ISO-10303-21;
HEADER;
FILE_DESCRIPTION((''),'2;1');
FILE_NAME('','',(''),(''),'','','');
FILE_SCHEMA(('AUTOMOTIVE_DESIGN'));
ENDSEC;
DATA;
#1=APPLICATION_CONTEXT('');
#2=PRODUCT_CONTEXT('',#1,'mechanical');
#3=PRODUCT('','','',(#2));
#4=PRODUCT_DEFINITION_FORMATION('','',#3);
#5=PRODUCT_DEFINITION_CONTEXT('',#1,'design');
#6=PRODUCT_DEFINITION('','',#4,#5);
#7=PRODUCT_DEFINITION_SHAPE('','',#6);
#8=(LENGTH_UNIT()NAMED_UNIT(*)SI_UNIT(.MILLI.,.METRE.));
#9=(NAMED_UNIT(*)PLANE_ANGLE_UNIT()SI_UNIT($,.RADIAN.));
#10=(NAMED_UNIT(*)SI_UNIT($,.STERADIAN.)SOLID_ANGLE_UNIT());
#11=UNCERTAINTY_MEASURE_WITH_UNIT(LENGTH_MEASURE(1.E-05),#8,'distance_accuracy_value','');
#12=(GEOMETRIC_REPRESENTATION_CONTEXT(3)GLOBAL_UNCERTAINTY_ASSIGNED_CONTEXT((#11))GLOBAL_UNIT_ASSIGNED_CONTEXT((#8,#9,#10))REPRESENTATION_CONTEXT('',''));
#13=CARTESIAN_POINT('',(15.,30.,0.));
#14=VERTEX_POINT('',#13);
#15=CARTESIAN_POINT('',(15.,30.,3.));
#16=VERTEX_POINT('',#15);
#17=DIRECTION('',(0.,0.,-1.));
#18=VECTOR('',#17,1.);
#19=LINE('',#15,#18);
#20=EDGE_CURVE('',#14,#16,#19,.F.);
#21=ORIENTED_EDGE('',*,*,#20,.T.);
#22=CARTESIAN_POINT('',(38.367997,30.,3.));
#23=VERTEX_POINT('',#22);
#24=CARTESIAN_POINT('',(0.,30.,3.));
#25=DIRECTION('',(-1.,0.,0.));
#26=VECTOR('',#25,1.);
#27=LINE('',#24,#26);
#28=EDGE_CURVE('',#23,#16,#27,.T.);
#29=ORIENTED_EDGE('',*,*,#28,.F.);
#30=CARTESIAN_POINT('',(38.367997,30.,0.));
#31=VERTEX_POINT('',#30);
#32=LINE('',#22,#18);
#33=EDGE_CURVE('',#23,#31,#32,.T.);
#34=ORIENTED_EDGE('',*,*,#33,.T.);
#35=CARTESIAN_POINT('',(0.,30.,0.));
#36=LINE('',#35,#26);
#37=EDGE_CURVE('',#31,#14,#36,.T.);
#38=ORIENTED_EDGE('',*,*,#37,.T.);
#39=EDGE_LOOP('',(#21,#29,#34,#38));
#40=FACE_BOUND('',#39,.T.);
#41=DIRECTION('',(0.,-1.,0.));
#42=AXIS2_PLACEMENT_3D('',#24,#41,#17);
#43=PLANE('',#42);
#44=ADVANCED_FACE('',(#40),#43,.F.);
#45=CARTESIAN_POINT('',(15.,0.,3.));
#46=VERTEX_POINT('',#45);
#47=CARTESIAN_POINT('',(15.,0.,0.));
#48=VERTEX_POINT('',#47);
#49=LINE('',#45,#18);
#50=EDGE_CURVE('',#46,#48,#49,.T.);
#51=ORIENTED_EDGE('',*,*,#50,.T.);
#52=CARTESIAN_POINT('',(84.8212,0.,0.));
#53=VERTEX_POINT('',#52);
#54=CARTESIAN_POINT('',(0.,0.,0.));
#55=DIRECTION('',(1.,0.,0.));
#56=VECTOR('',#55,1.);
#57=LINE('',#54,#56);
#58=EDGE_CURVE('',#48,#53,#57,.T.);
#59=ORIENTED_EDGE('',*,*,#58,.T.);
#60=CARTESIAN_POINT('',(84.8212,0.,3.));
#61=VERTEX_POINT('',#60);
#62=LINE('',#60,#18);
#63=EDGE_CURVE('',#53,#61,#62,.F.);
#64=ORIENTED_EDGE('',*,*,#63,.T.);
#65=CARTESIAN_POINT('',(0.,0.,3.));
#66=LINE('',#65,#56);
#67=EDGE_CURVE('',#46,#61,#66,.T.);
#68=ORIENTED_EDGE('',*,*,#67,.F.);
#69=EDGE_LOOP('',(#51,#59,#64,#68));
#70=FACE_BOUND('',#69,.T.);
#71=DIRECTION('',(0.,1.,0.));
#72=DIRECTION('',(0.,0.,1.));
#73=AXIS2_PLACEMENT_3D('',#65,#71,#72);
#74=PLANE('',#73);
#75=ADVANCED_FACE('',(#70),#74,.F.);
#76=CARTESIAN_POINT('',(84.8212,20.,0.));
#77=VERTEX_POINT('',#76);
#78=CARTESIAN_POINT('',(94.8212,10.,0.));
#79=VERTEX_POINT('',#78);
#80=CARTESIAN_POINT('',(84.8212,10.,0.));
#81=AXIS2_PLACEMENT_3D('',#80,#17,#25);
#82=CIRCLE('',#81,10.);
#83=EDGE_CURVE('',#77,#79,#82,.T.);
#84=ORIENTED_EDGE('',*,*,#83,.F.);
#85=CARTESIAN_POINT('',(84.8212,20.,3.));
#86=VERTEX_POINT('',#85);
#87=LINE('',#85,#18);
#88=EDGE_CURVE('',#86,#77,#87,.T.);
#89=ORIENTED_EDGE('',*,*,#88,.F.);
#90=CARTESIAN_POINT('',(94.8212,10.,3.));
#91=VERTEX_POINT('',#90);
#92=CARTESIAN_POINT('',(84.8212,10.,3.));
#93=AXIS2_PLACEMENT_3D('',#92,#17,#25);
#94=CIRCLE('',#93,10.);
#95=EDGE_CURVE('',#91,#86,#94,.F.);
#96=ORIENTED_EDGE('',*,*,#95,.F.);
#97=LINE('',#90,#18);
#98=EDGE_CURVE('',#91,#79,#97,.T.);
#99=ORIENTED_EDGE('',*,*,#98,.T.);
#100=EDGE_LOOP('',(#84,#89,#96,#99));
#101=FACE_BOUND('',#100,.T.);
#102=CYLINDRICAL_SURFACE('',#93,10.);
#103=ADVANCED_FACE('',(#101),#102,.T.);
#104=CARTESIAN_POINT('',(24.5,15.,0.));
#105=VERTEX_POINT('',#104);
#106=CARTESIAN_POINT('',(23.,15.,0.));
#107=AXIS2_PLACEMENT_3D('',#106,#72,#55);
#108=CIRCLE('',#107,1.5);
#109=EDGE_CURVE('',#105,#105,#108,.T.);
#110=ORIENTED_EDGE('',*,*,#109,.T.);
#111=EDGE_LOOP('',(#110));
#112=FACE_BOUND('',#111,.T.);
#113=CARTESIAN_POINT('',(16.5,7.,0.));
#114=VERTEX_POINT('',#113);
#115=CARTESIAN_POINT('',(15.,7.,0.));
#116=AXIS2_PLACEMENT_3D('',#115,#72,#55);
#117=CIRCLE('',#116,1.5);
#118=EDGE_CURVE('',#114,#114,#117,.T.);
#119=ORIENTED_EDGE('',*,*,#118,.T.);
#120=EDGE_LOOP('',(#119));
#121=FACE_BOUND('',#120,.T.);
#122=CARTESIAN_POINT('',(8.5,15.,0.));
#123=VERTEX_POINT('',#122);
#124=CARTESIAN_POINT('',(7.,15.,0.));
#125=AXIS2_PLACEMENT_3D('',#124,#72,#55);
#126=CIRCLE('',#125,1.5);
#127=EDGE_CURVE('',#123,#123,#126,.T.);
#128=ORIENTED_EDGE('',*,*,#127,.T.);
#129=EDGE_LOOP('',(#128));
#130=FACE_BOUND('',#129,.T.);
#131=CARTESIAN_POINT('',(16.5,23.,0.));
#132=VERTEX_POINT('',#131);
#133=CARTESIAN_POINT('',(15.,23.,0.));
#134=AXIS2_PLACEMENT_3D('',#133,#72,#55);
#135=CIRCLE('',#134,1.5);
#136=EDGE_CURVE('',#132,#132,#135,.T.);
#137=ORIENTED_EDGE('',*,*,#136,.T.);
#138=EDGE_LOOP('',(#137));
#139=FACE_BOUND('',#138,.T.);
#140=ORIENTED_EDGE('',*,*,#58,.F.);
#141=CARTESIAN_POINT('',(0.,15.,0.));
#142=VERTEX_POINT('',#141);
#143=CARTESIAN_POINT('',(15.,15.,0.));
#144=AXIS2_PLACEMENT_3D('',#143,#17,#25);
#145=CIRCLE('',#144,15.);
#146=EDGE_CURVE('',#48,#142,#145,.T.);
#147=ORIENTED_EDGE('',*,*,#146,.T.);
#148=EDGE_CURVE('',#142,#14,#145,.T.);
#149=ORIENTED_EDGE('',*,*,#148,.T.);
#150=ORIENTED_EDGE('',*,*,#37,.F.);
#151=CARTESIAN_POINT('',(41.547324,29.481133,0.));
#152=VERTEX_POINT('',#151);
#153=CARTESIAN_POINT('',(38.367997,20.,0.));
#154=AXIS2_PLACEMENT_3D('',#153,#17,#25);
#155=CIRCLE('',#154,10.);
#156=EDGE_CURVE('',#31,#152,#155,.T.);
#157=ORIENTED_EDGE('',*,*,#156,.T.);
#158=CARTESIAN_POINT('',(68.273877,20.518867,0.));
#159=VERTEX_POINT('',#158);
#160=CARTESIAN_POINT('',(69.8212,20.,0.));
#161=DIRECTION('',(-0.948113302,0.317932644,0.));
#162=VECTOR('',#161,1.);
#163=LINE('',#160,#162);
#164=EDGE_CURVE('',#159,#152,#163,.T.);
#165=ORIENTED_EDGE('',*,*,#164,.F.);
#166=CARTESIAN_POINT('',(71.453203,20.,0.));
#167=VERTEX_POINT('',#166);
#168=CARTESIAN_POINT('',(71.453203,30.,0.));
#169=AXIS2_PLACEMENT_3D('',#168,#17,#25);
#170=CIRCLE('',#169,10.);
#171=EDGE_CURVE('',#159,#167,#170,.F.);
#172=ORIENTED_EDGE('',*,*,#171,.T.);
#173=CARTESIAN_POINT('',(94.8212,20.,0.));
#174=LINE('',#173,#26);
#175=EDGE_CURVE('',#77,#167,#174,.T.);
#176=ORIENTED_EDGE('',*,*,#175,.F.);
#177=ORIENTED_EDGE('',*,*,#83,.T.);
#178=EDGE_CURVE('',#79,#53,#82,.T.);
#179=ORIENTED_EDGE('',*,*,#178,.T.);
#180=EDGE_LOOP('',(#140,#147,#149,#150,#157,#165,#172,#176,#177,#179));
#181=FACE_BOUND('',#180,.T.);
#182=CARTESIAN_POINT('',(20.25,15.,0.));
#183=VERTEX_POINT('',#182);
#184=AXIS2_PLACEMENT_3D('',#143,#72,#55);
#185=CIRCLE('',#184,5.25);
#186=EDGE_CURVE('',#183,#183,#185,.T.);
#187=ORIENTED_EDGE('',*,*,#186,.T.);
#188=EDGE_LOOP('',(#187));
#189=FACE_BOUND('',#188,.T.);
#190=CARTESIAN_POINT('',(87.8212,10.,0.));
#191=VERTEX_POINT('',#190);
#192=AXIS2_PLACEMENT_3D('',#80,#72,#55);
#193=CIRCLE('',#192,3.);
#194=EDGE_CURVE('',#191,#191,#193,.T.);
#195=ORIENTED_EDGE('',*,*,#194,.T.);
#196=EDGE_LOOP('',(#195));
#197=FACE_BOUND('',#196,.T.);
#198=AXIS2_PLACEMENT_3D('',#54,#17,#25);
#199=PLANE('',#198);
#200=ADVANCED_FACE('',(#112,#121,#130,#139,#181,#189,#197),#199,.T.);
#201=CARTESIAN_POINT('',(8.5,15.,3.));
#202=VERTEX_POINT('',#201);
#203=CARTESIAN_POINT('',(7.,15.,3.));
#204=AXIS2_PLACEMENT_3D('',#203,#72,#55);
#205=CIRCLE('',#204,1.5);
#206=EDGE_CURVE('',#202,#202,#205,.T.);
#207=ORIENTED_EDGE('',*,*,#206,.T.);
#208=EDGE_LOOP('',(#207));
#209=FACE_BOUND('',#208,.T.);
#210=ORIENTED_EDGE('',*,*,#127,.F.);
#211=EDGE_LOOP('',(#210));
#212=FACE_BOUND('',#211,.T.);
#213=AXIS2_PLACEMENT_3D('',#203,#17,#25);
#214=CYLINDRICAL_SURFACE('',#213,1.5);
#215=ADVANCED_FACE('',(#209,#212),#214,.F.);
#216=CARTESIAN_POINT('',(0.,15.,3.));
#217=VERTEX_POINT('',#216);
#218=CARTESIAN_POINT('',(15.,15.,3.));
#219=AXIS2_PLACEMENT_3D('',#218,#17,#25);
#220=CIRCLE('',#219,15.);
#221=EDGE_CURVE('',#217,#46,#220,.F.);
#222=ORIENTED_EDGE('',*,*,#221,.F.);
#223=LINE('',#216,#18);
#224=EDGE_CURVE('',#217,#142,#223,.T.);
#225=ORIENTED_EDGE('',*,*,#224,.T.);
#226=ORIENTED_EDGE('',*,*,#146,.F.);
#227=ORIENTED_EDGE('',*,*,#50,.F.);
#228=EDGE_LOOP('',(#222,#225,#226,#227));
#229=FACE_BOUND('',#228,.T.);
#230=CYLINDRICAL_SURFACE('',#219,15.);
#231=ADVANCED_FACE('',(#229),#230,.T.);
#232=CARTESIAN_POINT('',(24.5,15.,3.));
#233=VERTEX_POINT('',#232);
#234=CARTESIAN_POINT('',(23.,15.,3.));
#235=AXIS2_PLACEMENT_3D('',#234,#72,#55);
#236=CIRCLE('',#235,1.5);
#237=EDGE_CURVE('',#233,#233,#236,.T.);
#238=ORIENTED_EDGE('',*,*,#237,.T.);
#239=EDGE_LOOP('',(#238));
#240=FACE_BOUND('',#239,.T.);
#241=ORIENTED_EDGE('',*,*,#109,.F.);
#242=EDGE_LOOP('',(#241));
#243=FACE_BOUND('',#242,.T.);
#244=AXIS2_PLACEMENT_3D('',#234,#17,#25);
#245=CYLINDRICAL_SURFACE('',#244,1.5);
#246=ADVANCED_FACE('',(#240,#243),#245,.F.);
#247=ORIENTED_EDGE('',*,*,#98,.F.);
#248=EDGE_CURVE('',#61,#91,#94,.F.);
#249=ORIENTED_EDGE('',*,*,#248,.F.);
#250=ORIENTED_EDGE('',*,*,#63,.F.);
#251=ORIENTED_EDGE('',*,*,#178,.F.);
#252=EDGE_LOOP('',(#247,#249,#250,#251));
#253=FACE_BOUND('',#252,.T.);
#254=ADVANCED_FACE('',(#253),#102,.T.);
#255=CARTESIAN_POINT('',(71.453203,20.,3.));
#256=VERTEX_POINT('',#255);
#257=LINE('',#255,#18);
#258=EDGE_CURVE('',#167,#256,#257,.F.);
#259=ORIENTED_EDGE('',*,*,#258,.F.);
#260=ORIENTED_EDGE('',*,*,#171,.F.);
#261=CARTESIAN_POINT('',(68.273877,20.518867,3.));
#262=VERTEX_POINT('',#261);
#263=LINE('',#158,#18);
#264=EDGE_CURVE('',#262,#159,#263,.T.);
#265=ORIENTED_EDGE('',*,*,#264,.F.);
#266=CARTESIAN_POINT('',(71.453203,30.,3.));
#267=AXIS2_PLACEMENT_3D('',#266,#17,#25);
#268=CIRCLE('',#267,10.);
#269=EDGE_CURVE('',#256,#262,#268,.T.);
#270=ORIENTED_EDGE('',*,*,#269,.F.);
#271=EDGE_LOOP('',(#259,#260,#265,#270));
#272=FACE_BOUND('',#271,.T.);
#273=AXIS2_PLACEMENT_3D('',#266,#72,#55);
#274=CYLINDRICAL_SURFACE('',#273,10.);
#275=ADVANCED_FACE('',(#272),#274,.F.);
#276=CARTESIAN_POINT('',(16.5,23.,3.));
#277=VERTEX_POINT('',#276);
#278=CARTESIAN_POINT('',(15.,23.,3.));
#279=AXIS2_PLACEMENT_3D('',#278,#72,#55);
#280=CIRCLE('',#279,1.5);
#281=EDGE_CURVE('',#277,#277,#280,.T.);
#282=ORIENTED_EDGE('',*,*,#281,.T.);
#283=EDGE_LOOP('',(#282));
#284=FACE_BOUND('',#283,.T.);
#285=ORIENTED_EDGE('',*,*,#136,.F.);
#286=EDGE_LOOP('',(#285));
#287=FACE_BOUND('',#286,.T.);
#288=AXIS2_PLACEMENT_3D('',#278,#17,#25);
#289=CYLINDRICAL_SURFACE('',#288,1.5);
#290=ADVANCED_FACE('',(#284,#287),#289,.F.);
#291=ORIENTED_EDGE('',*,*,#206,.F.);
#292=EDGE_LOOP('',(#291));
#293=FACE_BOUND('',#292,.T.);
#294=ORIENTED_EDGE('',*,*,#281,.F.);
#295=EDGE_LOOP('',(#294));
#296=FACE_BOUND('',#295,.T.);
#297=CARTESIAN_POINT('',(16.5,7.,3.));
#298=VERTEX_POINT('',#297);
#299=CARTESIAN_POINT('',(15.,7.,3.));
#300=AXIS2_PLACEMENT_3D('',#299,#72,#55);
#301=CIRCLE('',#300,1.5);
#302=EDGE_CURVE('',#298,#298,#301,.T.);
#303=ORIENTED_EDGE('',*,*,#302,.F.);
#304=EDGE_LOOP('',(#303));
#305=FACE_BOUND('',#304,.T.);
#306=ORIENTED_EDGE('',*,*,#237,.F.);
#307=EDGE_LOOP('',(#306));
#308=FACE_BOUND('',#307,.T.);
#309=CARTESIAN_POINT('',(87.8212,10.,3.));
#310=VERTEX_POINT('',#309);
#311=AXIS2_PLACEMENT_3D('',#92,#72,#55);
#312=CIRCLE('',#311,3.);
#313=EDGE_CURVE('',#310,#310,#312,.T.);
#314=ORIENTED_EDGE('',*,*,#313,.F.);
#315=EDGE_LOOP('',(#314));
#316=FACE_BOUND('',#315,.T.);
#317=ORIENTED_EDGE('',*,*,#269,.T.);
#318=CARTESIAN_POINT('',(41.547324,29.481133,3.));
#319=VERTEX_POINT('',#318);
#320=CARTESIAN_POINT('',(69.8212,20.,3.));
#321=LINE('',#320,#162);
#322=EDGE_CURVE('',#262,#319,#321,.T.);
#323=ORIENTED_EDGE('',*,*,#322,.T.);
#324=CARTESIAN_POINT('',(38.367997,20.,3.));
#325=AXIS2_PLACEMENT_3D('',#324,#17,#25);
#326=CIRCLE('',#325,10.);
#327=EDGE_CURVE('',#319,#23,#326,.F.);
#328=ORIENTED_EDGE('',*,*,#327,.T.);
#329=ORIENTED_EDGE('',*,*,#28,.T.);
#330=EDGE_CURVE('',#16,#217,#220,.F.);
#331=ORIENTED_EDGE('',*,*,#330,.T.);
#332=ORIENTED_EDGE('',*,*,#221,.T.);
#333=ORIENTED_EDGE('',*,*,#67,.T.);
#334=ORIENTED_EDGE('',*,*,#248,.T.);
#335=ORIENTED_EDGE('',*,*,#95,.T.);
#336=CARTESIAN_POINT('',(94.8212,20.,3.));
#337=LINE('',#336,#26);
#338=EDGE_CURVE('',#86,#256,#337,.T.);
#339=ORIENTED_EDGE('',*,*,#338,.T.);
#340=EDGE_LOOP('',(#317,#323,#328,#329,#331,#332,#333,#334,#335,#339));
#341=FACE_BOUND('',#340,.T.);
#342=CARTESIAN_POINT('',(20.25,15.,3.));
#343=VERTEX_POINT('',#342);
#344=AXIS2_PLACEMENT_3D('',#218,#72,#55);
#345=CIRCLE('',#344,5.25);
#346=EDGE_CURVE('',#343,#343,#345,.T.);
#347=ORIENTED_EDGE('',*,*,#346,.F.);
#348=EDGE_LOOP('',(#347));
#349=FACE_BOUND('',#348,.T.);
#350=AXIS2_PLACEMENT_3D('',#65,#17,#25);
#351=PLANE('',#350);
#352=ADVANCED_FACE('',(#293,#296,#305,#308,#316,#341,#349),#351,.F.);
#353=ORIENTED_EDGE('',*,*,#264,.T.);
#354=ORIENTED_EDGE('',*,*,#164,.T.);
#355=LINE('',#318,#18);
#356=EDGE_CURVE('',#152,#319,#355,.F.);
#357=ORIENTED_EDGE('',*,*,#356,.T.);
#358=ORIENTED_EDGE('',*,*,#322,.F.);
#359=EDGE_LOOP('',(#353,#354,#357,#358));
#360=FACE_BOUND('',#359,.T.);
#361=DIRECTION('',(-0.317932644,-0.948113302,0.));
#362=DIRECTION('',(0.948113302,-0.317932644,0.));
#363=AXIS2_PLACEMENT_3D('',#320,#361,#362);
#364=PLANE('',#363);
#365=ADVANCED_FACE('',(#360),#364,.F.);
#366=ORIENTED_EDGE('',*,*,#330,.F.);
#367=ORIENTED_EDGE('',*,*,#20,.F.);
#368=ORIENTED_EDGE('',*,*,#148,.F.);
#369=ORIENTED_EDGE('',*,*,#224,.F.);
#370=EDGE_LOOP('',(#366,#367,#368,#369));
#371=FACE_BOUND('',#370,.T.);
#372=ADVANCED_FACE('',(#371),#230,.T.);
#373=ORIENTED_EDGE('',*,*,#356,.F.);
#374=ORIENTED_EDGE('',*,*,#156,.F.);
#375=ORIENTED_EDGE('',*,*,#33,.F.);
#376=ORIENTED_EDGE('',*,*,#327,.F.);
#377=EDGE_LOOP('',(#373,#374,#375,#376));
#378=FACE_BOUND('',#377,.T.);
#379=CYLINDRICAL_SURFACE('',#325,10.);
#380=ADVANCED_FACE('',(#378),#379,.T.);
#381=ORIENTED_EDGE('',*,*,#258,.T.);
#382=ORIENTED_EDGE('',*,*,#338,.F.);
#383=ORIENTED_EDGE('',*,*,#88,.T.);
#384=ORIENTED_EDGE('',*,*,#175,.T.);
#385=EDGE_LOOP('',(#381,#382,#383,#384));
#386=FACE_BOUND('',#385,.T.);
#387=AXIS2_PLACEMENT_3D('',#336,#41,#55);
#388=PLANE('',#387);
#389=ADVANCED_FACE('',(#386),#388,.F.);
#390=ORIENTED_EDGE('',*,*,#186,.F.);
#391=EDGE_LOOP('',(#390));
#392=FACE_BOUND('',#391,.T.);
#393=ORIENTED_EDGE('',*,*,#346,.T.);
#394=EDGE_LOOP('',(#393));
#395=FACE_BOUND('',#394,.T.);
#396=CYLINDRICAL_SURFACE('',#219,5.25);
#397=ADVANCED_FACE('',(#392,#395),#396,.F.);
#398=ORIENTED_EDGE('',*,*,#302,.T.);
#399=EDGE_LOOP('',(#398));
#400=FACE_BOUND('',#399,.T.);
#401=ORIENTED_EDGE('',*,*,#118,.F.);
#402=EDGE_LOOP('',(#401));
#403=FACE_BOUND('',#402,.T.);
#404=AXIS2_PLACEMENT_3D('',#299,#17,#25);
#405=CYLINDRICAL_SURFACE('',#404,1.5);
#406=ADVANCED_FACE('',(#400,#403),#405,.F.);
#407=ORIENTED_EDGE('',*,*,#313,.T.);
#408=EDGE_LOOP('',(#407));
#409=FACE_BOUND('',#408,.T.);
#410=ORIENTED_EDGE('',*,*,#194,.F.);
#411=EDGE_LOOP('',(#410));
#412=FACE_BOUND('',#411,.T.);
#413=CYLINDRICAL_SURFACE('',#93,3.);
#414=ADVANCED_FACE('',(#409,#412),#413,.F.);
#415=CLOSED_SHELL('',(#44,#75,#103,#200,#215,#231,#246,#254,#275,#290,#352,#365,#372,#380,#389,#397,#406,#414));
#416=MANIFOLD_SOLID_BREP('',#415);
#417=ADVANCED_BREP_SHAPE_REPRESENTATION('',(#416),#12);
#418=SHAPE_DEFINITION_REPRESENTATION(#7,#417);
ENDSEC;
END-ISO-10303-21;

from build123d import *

# Parameters (mm, degrees)
SKETCH_1_R      = 5.25
SKETCH_1_R_2    = 1.5
SKETCH_1_R_3    = 3
EXTRUDE_1_DEPTH = 3
FILLET_1_R      = 10
FILLET_2_R      = 15


with BuildPart() as part:
    # 草图1 → 凸台-拉伸1 (new body)
    with BuildSketch(Plane.XY):
        Polygon((94.821200219, 20), (69.821200219, 20), (40, 30), (0, 30), (0, 0), (94.821200219, 0), align=None)
        with Locations((15, 15)):
            Circle(SKETCH_1_R, mode=Mode.SUBTRACT)
        with Locations((15, 23)):
            Circle(SKETCH_1_R_2, mode=Mode.SUBTRACT)
        with Locations((15, 7)):
            Circle(SKETCH_1_R_2, mode=Mode.SUBTRACT)
        with Locations((23, 15)):
            Circle(SKETCH_1_R_2, mode=Mode.SUBTRACT)
        with Locations((7, 15)):
            Circle(SKETCH_1_R_2, mode=Mode.SUBTRACT)
        with Locations((84.821200219, 10)):
            Circle(SKETCH_1_R_3, mode=Mode.SUBTRACT)
    extrude(amount=EXTRUDE_1_DEPTH)

    # 圆角1
    fillet_1_edges = [part.edges().sort_by_distance(p)[0] for p in [
        (94.821200219, 0, 1.5),
        (94.821200219, 20, 1.5),
        (69.821200219, 20, 1.5),
        (40, 30, 1.5),
    ]]
    fillet(fillet_1_edges, radius=FILLET_1_R - 0.0001)  # a hair under: the kernel refuses the full size

    # 圆角2
    fillet_2_edges = [part.edges().sort_by_distance(p)[0] for p in [
        (0, 0, 1.5),
        (0, 30, 1.5),
    ]]
    fillet(fillet_2_edges, radius=FILLET_2_R - 0.0001)  # a hair under: the kernel refuses the full size


solid = part.part
